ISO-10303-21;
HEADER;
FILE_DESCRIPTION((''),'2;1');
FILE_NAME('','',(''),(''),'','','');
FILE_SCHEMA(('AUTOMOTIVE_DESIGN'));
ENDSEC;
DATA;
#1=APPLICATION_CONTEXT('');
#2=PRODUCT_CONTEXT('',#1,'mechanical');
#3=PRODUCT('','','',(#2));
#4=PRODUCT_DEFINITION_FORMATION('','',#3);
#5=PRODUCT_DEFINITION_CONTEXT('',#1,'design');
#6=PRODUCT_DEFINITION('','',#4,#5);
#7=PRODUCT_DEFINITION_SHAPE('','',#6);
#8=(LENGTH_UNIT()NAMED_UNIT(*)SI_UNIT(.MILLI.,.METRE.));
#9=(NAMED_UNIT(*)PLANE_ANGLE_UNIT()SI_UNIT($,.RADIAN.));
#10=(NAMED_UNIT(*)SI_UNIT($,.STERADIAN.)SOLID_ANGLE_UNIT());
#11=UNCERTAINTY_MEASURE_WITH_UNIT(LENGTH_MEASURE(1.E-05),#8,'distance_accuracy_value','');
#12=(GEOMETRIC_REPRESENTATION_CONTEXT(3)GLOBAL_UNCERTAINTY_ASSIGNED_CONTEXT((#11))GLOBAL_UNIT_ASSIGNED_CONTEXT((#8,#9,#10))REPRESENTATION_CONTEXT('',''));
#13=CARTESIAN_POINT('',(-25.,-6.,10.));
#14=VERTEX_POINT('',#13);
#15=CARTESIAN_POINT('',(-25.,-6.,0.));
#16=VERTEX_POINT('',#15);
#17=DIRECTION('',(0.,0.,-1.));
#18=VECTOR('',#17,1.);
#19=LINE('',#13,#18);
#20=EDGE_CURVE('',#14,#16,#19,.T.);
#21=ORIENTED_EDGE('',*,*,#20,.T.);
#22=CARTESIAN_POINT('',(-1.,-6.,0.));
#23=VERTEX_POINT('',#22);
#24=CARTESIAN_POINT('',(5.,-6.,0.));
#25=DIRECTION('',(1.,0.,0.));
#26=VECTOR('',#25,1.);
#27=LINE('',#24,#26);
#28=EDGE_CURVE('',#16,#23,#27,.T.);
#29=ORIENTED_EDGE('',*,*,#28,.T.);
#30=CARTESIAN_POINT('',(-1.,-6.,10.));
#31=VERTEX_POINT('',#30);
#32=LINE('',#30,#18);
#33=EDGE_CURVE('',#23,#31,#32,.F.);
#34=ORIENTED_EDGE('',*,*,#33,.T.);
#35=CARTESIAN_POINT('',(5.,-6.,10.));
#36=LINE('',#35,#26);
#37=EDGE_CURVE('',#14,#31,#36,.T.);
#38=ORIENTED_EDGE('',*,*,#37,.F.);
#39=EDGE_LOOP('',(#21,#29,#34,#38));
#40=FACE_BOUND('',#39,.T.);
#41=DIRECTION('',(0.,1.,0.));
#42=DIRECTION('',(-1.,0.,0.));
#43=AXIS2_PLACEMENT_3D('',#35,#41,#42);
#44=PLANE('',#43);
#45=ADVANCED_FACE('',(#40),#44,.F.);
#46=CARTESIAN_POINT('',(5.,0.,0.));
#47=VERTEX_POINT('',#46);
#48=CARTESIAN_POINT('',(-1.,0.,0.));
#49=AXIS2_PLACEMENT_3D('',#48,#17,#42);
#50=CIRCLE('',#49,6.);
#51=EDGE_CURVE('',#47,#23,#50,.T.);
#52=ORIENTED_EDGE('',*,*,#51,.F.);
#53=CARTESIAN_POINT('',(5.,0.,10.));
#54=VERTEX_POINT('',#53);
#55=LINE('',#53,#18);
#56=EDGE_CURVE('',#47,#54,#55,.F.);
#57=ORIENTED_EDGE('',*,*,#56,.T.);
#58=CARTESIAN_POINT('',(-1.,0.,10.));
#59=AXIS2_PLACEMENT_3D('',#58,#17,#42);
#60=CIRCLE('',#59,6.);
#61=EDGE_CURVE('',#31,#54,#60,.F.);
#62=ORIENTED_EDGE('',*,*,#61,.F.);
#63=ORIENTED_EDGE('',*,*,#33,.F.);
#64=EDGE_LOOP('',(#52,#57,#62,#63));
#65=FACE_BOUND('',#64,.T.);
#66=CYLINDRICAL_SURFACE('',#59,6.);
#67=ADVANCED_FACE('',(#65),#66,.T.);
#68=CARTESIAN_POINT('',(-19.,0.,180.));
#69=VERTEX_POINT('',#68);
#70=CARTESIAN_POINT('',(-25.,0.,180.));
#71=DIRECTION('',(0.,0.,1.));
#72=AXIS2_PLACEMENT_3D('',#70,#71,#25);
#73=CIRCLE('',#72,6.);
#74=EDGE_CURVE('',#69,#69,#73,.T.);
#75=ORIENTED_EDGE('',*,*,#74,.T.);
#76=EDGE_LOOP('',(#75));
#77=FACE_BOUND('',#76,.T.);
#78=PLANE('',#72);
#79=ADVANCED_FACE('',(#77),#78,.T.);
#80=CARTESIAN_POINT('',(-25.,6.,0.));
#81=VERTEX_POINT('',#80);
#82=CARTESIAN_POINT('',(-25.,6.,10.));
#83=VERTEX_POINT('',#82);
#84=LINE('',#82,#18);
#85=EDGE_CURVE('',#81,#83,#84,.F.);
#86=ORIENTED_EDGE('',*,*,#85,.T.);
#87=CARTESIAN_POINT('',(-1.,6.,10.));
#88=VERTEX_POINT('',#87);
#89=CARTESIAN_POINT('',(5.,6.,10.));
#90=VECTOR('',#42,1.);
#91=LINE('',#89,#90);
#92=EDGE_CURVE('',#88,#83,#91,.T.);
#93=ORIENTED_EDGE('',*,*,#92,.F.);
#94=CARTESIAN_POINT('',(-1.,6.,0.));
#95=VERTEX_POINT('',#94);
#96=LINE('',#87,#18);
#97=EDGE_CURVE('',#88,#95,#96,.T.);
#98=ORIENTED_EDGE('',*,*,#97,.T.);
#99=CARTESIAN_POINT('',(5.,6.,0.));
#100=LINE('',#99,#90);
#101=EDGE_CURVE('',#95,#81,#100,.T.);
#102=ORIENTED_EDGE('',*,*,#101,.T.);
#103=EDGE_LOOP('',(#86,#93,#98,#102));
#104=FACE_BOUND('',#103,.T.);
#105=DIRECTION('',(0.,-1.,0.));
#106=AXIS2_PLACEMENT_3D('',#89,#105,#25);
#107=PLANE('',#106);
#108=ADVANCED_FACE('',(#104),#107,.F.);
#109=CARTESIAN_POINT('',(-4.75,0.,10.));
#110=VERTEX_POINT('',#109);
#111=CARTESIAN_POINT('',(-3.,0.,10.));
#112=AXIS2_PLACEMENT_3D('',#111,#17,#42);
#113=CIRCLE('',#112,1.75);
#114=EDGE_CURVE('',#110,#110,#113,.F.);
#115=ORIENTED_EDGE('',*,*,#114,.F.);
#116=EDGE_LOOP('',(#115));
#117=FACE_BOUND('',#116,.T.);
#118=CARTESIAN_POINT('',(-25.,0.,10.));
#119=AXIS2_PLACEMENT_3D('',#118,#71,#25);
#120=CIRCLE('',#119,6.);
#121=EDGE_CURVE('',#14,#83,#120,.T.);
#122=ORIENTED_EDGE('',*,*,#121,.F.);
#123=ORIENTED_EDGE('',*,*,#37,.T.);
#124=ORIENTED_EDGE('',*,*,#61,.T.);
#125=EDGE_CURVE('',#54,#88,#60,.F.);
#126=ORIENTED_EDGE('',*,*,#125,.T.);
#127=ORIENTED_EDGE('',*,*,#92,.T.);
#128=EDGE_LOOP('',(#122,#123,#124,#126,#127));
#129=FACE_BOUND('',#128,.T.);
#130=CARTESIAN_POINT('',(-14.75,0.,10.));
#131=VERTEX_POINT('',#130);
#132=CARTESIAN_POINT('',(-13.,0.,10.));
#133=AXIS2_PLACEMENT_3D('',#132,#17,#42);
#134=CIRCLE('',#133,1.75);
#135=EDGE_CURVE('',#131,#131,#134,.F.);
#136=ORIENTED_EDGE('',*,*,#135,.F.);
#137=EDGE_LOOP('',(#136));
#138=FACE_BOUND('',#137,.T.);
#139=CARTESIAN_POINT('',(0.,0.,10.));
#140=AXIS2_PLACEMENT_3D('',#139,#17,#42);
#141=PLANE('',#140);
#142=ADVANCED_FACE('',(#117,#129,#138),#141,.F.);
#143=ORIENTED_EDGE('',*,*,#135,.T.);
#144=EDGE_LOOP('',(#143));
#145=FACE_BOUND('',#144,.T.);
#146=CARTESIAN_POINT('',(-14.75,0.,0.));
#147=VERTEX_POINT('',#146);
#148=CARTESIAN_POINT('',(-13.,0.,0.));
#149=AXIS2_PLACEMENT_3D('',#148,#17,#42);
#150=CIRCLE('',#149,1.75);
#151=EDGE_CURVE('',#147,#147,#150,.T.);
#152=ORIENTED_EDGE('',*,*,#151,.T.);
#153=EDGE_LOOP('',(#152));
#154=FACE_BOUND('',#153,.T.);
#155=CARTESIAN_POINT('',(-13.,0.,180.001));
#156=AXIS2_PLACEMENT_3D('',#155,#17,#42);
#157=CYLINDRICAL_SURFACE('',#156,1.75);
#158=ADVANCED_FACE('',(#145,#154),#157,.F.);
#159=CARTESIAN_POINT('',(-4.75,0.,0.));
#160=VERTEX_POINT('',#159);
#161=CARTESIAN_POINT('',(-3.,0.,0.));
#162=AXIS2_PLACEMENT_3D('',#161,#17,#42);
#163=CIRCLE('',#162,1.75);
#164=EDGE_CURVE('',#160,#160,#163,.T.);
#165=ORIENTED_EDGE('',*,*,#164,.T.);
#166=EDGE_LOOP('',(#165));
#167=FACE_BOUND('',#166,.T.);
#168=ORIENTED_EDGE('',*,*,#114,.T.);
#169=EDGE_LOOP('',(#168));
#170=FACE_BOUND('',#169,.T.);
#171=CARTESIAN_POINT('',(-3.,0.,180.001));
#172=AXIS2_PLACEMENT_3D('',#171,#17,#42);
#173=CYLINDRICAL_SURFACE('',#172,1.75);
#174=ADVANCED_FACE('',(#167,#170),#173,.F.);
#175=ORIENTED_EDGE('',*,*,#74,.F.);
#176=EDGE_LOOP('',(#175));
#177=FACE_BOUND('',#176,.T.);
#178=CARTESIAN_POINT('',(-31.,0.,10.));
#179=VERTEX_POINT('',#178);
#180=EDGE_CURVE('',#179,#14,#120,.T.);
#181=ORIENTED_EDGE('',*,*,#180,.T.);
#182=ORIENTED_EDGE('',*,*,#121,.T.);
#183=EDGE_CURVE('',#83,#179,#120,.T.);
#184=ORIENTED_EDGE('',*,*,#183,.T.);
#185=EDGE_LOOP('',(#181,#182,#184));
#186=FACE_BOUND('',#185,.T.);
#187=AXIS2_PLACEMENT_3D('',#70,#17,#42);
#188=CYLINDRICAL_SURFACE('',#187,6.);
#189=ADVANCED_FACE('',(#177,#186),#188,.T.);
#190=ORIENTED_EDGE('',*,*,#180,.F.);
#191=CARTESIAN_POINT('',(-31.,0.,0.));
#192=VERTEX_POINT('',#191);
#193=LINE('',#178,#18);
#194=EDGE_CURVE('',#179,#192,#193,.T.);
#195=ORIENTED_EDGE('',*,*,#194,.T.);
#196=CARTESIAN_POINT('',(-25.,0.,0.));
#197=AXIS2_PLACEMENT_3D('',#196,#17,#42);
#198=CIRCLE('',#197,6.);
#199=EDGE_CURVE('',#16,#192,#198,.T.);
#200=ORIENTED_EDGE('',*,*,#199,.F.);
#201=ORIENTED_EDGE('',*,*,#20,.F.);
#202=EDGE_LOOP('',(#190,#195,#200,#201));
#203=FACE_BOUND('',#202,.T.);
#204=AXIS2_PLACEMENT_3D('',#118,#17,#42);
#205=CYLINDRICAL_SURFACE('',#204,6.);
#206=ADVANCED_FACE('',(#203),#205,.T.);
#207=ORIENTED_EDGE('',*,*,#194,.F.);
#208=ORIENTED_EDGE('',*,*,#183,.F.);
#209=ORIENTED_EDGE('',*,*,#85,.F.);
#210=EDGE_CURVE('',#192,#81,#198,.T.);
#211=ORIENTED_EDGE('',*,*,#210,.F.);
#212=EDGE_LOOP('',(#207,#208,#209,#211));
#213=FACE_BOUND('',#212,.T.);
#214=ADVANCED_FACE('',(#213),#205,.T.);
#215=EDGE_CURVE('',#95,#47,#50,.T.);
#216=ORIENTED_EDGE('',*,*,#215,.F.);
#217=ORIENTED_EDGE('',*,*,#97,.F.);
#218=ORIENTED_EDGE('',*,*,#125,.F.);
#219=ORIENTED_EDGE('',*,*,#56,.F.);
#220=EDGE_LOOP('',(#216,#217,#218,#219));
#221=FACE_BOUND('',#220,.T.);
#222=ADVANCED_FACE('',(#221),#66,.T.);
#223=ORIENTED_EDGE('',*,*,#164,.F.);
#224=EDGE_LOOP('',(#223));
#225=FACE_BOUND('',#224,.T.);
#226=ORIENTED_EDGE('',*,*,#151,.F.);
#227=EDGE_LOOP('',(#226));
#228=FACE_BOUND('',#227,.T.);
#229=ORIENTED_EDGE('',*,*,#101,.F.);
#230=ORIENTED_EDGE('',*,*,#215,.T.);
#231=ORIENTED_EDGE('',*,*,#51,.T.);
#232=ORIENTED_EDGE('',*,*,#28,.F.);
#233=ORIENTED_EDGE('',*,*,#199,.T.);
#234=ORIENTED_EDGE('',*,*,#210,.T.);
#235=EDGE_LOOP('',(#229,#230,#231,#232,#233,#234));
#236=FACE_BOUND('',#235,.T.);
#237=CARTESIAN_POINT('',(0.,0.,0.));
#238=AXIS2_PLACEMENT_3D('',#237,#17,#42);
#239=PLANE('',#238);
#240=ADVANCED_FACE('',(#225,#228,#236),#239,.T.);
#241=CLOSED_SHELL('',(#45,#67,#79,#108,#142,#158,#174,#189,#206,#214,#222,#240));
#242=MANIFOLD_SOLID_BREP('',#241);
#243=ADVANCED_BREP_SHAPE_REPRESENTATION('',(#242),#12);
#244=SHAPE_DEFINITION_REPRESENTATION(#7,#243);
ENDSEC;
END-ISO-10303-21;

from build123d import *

# Parameters (mm, degrees)
SKETCH1_W           = 36
SKETCH1_H           = 12
BOSS_EXTRUDE1_DEPTH = 10
SKETCH2_R           = 6
BOSS_EXTRUDE2_DEPTH = 170
CUT_EXTRUDE4_REACH  = 184.748
SKETCH7_R           = 1.75
FILLET1_R           = 6


with BuildPart() as part:
    # Sketch1 → Boss-Extrude1 (new body)
    with BuildSketch(Plane.XY):
        with Locations((-13, 0)):
            Rectangle(SKETCH1_W, SKETCH1_H)
    extrude(amount=BOSS_EXTRUDE1_DEPTH)

    # Sketch2 → Boss-Extrude2 (add)
    with BuildSketch(Plane.XY.offset(10)):
        with Locations(Location((-25, 0, 0), (0, 0, 180))):
            Circle(SKETCH2_R)
    extrude(amount=BOSS_EXTRUDE2_DEPTH)

    # Sketch7 → Cut-Extrude4 (cut, up to next)
    with BuildSketch(Plane(origin=(0, 0, 0), x_dir=(-1, 0, 0), z_dir=(0, 0, -1)), mode=Mode.PRIVATE) as cut_extrude4_sk1:
        with Locations((3, 0)):
            Circle(SKETCH7_R)
    cut_extrude4_tool1 = extrude(cut_extrude4_sk1.sketch, amount=-CUT_EXTRUDE4_REACH, mode=Mode.PRIVATE) & part.part
    # Sketch7 → Cut-Extrude4 (cut, up to next)
    with BuildSketch(Plane(origin=(0, 0, 0), x_dir=(-1, 0, 0), z_dir=(0, 0, -1)), mode=Mode.PRIVATE) as cut_extrude4_sk2:
        with Locations((13, 0)):
            Circle(SKETCH7_R)
    cut_extrude4_tool2 = extrude(cut_extrude4_sk2.sketch, amount=-CUT_EXTRUDE4_REACH, mode=Mode.PRIVATE) & part.part
    add(cut_extrude4_tool1.solids().sort_by_distance((-3, 0, 0))[0], mode=Mode.SUBTRACT)
    add(cut_extrude4_tool2.solids().sort_by_distance((-13, 0, 0))[0], mode=Mode.SUBTRACT)

    # Fillet1
    fillet1_edges = [part.edges().sort_by_distance(p)[0] for p in [
        (5, -6, 5),
        (5, 6, 5),
        (-31, -6, 5),
        (-31, 6, 5),
    ]]
    fillet(fillet1_edges, radius=FILLET1_R - 0.0001)  # a hair under: the kernel refuses the full size


solid = part.part
